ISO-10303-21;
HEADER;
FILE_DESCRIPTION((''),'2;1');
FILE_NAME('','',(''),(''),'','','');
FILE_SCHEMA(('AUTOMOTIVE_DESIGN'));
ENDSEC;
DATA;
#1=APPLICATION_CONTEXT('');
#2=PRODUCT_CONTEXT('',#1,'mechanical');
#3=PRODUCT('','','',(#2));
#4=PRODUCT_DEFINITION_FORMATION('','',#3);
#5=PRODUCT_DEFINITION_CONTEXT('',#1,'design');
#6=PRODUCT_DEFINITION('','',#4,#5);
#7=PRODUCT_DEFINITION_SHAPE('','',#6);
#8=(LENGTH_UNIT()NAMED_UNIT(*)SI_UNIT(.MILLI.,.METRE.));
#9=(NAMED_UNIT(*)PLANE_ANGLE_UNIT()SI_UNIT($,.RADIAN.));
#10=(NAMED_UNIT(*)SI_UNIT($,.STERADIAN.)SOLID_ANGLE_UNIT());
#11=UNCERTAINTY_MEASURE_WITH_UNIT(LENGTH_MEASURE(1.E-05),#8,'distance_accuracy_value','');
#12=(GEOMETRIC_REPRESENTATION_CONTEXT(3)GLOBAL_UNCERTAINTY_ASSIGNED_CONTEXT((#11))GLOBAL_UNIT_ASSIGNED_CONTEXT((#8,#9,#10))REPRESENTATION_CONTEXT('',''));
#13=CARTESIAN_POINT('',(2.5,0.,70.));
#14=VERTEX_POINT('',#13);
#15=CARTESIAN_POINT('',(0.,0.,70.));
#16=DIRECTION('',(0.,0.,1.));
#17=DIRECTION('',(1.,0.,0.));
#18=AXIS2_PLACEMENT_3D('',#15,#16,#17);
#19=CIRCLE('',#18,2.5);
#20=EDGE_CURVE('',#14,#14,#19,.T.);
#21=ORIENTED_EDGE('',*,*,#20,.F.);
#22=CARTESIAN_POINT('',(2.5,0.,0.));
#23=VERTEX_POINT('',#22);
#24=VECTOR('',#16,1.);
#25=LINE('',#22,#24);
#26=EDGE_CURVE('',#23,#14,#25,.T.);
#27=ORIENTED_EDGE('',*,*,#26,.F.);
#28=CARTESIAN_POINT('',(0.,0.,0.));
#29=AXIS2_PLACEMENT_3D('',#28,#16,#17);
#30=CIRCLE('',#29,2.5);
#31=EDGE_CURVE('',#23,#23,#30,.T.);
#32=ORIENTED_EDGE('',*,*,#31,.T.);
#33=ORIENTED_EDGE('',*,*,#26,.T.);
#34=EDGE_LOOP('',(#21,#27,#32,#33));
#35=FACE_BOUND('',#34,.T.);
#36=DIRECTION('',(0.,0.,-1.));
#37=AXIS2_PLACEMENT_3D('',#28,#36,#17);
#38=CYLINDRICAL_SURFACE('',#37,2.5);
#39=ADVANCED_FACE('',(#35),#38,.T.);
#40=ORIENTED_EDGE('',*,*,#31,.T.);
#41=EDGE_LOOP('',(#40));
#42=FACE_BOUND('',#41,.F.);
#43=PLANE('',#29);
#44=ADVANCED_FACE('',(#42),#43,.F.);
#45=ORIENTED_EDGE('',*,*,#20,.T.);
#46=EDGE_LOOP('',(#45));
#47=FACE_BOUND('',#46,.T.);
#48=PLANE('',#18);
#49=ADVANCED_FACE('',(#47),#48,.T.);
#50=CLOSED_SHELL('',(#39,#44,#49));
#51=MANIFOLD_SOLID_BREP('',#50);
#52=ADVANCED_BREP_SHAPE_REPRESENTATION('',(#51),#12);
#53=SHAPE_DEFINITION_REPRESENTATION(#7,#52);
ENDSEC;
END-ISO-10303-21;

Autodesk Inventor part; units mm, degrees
ref_plane "YZ Plane" through (0, 0, 0) normal (1, 0, 0) x (0, 1, 0)
ref_plane "XZ Plane" through (0, 0, 0) normal (0, 1, 0) x (-1, 0, 0)
ref_plane "XY Plane" through (0, 0, 0) normal (0, 0, 1) x (1, 0, 0)
sketch "Szkic1" plane through (0, 0, 0) normal (0, 0, 1) x (1, 0, 0)
  circle A0 centre (0, 0) radius 2.5
  dimension "d0" = 5
extrude "Wyciągnięcie proste1" add sketch "Szkic1" along normal blind 70
thread "Gwint1" size "M5x0.8" class "6g" standard "ISO Metric profile" length 10
thread "Gwint2" size "M5x0.8" class "6g" standard "ANSI Metric M Profile" length 10
properties part number "mocowanie_kolek"
